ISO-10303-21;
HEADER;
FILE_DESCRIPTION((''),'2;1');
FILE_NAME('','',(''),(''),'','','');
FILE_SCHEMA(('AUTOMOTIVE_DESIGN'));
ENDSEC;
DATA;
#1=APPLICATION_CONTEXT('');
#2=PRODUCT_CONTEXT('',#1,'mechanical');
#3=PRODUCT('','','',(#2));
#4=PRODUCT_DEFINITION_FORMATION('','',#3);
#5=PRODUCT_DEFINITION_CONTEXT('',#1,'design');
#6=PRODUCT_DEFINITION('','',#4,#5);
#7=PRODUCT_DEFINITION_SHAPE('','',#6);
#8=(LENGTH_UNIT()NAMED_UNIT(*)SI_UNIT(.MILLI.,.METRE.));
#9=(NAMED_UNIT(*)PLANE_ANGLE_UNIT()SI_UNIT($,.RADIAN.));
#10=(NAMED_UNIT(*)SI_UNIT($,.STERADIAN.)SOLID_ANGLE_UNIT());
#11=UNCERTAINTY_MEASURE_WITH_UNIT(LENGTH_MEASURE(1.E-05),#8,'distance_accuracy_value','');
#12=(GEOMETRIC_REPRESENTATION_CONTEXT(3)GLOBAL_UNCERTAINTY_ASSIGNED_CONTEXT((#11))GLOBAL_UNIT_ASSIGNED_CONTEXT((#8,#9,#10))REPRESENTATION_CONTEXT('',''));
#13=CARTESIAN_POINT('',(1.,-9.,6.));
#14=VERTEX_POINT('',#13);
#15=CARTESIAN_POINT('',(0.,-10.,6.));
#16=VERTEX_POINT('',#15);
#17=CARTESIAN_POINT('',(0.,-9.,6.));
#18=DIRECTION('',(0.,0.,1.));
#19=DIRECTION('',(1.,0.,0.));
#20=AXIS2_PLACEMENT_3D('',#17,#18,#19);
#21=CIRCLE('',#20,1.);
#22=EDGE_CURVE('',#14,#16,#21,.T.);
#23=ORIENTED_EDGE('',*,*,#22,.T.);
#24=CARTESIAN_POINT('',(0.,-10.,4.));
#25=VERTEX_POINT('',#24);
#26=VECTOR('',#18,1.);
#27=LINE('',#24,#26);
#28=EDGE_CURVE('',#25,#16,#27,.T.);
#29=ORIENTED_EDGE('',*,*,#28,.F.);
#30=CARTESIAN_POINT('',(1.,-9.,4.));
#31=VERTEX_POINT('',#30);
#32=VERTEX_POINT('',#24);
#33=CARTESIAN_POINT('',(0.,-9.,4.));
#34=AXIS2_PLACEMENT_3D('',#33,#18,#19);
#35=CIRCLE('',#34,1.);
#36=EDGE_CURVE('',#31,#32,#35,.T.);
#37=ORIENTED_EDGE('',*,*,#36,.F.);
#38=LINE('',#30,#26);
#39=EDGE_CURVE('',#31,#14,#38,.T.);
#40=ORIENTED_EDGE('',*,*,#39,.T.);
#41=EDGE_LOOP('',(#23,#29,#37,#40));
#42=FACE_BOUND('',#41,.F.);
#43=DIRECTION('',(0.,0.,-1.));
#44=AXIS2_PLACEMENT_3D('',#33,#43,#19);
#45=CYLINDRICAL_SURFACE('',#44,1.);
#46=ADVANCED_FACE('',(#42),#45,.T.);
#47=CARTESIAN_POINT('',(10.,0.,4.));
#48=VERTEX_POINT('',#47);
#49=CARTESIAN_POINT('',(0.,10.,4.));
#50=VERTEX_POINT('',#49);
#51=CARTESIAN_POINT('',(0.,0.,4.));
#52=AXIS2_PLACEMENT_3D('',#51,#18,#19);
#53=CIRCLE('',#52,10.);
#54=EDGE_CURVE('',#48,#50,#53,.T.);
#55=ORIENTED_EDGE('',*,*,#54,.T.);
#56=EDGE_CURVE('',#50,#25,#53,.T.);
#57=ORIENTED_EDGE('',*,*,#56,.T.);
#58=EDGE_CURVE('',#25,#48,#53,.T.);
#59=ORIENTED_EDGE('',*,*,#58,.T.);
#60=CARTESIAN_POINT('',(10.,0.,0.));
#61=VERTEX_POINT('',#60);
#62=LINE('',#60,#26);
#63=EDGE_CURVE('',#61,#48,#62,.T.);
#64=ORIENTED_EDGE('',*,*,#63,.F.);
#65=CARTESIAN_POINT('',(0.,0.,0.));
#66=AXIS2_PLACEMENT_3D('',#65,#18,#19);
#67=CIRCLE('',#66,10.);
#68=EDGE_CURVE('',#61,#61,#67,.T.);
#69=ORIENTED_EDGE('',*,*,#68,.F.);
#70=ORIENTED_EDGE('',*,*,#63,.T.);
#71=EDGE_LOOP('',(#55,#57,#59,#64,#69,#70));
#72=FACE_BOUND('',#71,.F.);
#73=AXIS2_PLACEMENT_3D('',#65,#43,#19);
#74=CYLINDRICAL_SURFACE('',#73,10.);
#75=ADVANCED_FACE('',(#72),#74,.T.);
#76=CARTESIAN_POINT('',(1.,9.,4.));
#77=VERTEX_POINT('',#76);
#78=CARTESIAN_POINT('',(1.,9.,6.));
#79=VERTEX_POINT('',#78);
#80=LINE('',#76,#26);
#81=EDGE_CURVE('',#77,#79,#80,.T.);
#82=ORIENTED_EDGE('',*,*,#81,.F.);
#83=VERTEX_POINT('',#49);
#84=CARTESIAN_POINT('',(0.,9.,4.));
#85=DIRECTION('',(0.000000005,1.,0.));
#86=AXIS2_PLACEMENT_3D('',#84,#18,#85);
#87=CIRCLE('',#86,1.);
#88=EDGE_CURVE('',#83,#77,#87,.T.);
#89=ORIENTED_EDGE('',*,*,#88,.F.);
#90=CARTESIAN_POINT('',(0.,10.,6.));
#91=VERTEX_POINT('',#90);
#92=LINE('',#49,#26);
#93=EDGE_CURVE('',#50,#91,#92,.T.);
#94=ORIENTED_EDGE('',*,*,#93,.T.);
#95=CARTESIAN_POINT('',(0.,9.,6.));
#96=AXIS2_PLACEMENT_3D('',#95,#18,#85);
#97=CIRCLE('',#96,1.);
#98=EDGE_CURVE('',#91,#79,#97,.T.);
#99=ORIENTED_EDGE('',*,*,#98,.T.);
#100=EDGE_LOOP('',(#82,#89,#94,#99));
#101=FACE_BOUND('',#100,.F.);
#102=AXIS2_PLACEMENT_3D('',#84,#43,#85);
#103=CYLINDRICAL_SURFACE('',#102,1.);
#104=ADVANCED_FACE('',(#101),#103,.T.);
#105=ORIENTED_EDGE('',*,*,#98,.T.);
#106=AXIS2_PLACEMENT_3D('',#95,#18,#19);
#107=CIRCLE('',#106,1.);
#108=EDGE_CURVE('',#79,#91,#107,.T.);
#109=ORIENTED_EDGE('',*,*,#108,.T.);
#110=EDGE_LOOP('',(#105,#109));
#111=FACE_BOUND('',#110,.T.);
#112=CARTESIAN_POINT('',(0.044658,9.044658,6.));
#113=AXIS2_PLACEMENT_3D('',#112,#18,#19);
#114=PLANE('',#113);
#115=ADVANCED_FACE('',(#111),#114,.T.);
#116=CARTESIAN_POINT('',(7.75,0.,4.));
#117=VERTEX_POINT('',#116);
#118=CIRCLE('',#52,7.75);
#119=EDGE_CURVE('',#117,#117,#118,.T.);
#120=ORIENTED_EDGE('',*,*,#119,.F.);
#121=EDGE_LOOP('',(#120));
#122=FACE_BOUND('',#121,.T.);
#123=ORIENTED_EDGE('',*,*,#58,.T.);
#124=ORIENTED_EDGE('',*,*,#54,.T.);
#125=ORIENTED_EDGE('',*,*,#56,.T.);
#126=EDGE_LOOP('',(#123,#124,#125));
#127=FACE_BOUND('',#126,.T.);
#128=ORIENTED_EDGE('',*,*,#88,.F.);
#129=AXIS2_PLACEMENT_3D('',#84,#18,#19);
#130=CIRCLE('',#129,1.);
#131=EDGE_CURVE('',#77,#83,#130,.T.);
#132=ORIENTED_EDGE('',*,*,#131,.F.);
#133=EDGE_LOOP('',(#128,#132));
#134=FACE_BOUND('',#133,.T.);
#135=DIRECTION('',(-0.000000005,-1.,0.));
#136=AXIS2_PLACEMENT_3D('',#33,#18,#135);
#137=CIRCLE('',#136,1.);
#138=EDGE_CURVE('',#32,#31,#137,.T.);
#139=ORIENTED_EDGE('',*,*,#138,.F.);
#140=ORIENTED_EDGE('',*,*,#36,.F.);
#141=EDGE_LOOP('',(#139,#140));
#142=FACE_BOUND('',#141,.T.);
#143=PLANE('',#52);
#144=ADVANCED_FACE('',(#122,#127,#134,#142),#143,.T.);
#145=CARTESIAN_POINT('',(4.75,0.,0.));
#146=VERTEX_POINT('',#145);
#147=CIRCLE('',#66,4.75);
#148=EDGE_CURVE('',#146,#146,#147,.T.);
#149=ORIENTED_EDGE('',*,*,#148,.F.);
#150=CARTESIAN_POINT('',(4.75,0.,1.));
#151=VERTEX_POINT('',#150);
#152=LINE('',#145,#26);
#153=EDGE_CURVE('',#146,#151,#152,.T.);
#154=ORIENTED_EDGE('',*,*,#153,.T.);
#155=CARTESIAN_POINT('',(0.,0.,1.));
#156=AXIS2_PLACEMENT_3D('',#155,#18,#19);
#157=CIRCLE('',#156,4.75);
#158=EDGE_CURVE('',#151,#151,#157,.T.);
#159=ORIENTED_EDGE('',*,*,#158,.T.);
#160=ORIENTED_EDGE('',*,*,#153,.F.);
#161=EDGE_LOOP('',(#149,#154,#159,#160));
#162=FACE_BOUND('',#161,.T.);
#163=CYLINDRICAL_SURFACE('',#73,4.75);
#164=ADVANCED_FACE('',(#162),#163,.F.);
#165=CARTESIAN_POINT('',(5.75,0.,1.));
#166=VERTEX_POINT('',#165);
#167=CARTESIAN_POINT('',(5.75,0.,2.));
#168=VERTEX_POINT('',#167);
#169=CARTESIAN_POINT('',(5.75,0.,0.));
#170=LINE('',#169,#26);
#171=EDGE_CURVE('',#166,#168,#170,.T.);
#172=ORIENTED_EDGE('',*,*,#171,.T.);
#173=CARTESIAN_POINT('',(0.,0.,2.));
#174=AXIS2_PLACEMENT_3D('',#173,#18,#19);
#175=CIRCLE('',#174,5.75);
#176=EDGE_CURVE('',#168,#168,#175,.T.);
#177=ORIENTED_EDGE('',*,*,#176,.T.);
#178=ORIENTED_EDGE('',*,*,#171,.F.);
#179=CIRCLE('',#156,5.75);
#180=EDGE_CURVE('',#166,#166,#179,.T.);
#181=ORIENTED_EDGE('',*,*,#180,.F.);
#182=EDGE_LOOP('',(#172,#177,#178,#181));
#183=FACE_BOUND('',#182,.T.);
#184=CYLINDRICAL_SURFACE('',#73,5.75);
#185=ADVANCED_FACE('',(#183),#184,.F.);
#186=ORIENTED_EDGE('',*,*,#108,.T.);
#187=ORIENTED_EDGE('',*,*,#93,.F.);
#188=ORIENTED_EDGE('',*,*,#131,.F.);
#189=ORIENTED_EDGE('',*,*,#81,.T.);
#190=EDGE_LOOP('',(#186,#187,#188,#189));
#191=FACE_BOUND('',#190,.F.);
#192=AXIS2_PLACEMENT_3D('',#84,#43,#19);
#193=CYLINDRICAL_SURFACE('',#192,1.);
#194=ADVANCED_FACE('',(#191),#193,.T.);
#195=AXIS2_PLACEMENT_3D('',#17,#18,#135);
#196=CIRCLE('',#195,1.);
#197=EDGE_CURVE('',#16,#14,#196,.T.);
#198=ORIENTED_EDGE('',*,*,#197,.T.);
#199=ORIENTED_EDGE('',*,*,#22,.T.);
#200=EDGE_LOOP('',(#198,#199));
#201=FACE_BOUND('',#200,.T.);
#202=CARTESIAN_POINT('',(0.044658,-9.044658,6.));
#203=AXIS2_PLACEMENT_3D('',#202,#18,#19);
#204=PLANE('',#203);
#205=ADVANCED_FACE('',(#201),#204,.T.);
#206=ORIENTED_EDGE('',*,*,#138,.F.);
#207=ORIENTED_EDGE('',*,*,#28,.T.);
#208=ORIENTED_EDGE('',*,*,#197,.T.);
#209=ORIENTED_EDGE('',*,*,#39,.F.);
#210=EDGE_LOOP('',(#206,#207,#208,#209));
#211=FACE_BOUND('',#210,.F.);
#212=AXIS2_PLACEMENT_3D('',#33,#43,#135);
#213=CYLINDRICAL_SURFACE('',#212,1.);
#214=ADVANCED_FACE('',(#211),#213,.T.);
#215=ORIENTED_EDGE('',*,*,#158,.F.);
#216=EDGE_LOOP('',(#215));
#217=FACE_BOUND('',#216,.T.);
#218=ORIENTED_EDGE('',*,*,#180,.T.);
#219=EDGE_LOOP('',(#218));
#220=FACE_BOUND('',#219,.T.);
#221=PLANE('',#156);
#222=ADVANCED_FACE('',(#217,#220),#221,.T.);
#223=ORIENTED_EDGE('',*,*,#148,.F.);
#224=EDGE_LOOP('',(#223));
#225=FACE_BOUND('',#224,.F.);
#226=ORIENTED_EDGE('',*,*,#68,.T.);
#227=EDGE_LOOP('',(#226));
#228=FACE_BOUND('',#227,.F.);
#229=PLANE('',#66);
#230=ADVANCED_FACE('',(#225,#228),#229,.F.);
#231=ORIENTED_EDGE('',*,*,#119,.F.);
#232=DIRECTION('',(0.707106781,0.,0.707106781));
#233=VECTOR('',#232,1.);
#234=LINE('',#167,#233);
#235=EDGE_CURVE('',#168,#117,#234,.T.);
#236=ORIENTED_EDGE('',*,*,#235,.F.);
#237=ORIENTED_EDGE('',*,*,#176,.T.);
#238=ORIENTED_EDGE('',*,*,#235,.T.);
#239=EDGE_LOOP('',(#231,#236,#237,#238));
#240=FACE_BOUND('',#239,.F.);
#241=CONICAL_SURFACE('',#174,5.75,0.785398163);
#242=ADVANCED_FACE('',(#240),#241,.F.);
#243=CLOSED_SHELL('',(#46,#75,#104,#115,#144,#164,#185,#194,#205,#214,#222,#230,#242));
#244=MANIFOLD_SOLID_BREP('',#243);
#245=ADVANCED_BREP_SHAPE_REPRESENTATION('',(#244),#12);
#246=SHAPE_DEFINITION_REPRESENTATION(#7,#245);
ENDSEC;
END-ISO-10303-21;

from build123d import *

# Parameters (mm, degrees)
F0_R     = 10
F0_R_2   = 5.75
F1_DEPTH = 4
F0_R_3   = 4.75
F2_DEPTH = 1
F3_SIZE  = 2
F5_DEPTH = 2


# Not quite as in the source:
# - a feature names something its author has since deleted; it is built from what else it names


with BuildPart() as f1:
    # F0 (on Top) → F1 (new body)
    with BuildSketch(Plane.XY):
        Circle(F0_R)
        Circle(F0_R_2, mode=Mode.SUBTRACT)
    extrude(amount=F1_DEPTH)

    # F0 (on Top) → F2 (join)
    with BuildSketch(Plane.XY):
        Circle(F0_R_2)
        Circle(F0_R_3, mode=Mode.SUBTRACT)
    extrude(amount=F2_DEPTH)

    # F3
    f3_edges = [f1.edges().sort_by_distance(p)[0] for p in [
        (-5.75, 0, 4),
    ]]
    chamfer(f3_edges, length=F3_SIZE)

    # F4 (on face) → F5 (join)
    with BuildSketch(Plane.XY.offset(4)):
        with BuildLine():
            ThreePointArc((4.5e-09, 10), (-0.7071067828, 8.2928932204), (1, 9))
            ThreePointArc((1, 9), (0.7071067828, 9.7071067796), (4.5e-09, 10))
        make_face()
        with BuildLine():
            ThreePointArc((1, -9), (-0.7071067792, -8.2928932169), (-5.5e-09, -10))
            ThreePointArc((-5.5e-09, -10), (0.7071067792, -9.7071067831), (1, -9))
        make_face()
    extrude(amount=F5_DEPTH)


solid = f1.part
